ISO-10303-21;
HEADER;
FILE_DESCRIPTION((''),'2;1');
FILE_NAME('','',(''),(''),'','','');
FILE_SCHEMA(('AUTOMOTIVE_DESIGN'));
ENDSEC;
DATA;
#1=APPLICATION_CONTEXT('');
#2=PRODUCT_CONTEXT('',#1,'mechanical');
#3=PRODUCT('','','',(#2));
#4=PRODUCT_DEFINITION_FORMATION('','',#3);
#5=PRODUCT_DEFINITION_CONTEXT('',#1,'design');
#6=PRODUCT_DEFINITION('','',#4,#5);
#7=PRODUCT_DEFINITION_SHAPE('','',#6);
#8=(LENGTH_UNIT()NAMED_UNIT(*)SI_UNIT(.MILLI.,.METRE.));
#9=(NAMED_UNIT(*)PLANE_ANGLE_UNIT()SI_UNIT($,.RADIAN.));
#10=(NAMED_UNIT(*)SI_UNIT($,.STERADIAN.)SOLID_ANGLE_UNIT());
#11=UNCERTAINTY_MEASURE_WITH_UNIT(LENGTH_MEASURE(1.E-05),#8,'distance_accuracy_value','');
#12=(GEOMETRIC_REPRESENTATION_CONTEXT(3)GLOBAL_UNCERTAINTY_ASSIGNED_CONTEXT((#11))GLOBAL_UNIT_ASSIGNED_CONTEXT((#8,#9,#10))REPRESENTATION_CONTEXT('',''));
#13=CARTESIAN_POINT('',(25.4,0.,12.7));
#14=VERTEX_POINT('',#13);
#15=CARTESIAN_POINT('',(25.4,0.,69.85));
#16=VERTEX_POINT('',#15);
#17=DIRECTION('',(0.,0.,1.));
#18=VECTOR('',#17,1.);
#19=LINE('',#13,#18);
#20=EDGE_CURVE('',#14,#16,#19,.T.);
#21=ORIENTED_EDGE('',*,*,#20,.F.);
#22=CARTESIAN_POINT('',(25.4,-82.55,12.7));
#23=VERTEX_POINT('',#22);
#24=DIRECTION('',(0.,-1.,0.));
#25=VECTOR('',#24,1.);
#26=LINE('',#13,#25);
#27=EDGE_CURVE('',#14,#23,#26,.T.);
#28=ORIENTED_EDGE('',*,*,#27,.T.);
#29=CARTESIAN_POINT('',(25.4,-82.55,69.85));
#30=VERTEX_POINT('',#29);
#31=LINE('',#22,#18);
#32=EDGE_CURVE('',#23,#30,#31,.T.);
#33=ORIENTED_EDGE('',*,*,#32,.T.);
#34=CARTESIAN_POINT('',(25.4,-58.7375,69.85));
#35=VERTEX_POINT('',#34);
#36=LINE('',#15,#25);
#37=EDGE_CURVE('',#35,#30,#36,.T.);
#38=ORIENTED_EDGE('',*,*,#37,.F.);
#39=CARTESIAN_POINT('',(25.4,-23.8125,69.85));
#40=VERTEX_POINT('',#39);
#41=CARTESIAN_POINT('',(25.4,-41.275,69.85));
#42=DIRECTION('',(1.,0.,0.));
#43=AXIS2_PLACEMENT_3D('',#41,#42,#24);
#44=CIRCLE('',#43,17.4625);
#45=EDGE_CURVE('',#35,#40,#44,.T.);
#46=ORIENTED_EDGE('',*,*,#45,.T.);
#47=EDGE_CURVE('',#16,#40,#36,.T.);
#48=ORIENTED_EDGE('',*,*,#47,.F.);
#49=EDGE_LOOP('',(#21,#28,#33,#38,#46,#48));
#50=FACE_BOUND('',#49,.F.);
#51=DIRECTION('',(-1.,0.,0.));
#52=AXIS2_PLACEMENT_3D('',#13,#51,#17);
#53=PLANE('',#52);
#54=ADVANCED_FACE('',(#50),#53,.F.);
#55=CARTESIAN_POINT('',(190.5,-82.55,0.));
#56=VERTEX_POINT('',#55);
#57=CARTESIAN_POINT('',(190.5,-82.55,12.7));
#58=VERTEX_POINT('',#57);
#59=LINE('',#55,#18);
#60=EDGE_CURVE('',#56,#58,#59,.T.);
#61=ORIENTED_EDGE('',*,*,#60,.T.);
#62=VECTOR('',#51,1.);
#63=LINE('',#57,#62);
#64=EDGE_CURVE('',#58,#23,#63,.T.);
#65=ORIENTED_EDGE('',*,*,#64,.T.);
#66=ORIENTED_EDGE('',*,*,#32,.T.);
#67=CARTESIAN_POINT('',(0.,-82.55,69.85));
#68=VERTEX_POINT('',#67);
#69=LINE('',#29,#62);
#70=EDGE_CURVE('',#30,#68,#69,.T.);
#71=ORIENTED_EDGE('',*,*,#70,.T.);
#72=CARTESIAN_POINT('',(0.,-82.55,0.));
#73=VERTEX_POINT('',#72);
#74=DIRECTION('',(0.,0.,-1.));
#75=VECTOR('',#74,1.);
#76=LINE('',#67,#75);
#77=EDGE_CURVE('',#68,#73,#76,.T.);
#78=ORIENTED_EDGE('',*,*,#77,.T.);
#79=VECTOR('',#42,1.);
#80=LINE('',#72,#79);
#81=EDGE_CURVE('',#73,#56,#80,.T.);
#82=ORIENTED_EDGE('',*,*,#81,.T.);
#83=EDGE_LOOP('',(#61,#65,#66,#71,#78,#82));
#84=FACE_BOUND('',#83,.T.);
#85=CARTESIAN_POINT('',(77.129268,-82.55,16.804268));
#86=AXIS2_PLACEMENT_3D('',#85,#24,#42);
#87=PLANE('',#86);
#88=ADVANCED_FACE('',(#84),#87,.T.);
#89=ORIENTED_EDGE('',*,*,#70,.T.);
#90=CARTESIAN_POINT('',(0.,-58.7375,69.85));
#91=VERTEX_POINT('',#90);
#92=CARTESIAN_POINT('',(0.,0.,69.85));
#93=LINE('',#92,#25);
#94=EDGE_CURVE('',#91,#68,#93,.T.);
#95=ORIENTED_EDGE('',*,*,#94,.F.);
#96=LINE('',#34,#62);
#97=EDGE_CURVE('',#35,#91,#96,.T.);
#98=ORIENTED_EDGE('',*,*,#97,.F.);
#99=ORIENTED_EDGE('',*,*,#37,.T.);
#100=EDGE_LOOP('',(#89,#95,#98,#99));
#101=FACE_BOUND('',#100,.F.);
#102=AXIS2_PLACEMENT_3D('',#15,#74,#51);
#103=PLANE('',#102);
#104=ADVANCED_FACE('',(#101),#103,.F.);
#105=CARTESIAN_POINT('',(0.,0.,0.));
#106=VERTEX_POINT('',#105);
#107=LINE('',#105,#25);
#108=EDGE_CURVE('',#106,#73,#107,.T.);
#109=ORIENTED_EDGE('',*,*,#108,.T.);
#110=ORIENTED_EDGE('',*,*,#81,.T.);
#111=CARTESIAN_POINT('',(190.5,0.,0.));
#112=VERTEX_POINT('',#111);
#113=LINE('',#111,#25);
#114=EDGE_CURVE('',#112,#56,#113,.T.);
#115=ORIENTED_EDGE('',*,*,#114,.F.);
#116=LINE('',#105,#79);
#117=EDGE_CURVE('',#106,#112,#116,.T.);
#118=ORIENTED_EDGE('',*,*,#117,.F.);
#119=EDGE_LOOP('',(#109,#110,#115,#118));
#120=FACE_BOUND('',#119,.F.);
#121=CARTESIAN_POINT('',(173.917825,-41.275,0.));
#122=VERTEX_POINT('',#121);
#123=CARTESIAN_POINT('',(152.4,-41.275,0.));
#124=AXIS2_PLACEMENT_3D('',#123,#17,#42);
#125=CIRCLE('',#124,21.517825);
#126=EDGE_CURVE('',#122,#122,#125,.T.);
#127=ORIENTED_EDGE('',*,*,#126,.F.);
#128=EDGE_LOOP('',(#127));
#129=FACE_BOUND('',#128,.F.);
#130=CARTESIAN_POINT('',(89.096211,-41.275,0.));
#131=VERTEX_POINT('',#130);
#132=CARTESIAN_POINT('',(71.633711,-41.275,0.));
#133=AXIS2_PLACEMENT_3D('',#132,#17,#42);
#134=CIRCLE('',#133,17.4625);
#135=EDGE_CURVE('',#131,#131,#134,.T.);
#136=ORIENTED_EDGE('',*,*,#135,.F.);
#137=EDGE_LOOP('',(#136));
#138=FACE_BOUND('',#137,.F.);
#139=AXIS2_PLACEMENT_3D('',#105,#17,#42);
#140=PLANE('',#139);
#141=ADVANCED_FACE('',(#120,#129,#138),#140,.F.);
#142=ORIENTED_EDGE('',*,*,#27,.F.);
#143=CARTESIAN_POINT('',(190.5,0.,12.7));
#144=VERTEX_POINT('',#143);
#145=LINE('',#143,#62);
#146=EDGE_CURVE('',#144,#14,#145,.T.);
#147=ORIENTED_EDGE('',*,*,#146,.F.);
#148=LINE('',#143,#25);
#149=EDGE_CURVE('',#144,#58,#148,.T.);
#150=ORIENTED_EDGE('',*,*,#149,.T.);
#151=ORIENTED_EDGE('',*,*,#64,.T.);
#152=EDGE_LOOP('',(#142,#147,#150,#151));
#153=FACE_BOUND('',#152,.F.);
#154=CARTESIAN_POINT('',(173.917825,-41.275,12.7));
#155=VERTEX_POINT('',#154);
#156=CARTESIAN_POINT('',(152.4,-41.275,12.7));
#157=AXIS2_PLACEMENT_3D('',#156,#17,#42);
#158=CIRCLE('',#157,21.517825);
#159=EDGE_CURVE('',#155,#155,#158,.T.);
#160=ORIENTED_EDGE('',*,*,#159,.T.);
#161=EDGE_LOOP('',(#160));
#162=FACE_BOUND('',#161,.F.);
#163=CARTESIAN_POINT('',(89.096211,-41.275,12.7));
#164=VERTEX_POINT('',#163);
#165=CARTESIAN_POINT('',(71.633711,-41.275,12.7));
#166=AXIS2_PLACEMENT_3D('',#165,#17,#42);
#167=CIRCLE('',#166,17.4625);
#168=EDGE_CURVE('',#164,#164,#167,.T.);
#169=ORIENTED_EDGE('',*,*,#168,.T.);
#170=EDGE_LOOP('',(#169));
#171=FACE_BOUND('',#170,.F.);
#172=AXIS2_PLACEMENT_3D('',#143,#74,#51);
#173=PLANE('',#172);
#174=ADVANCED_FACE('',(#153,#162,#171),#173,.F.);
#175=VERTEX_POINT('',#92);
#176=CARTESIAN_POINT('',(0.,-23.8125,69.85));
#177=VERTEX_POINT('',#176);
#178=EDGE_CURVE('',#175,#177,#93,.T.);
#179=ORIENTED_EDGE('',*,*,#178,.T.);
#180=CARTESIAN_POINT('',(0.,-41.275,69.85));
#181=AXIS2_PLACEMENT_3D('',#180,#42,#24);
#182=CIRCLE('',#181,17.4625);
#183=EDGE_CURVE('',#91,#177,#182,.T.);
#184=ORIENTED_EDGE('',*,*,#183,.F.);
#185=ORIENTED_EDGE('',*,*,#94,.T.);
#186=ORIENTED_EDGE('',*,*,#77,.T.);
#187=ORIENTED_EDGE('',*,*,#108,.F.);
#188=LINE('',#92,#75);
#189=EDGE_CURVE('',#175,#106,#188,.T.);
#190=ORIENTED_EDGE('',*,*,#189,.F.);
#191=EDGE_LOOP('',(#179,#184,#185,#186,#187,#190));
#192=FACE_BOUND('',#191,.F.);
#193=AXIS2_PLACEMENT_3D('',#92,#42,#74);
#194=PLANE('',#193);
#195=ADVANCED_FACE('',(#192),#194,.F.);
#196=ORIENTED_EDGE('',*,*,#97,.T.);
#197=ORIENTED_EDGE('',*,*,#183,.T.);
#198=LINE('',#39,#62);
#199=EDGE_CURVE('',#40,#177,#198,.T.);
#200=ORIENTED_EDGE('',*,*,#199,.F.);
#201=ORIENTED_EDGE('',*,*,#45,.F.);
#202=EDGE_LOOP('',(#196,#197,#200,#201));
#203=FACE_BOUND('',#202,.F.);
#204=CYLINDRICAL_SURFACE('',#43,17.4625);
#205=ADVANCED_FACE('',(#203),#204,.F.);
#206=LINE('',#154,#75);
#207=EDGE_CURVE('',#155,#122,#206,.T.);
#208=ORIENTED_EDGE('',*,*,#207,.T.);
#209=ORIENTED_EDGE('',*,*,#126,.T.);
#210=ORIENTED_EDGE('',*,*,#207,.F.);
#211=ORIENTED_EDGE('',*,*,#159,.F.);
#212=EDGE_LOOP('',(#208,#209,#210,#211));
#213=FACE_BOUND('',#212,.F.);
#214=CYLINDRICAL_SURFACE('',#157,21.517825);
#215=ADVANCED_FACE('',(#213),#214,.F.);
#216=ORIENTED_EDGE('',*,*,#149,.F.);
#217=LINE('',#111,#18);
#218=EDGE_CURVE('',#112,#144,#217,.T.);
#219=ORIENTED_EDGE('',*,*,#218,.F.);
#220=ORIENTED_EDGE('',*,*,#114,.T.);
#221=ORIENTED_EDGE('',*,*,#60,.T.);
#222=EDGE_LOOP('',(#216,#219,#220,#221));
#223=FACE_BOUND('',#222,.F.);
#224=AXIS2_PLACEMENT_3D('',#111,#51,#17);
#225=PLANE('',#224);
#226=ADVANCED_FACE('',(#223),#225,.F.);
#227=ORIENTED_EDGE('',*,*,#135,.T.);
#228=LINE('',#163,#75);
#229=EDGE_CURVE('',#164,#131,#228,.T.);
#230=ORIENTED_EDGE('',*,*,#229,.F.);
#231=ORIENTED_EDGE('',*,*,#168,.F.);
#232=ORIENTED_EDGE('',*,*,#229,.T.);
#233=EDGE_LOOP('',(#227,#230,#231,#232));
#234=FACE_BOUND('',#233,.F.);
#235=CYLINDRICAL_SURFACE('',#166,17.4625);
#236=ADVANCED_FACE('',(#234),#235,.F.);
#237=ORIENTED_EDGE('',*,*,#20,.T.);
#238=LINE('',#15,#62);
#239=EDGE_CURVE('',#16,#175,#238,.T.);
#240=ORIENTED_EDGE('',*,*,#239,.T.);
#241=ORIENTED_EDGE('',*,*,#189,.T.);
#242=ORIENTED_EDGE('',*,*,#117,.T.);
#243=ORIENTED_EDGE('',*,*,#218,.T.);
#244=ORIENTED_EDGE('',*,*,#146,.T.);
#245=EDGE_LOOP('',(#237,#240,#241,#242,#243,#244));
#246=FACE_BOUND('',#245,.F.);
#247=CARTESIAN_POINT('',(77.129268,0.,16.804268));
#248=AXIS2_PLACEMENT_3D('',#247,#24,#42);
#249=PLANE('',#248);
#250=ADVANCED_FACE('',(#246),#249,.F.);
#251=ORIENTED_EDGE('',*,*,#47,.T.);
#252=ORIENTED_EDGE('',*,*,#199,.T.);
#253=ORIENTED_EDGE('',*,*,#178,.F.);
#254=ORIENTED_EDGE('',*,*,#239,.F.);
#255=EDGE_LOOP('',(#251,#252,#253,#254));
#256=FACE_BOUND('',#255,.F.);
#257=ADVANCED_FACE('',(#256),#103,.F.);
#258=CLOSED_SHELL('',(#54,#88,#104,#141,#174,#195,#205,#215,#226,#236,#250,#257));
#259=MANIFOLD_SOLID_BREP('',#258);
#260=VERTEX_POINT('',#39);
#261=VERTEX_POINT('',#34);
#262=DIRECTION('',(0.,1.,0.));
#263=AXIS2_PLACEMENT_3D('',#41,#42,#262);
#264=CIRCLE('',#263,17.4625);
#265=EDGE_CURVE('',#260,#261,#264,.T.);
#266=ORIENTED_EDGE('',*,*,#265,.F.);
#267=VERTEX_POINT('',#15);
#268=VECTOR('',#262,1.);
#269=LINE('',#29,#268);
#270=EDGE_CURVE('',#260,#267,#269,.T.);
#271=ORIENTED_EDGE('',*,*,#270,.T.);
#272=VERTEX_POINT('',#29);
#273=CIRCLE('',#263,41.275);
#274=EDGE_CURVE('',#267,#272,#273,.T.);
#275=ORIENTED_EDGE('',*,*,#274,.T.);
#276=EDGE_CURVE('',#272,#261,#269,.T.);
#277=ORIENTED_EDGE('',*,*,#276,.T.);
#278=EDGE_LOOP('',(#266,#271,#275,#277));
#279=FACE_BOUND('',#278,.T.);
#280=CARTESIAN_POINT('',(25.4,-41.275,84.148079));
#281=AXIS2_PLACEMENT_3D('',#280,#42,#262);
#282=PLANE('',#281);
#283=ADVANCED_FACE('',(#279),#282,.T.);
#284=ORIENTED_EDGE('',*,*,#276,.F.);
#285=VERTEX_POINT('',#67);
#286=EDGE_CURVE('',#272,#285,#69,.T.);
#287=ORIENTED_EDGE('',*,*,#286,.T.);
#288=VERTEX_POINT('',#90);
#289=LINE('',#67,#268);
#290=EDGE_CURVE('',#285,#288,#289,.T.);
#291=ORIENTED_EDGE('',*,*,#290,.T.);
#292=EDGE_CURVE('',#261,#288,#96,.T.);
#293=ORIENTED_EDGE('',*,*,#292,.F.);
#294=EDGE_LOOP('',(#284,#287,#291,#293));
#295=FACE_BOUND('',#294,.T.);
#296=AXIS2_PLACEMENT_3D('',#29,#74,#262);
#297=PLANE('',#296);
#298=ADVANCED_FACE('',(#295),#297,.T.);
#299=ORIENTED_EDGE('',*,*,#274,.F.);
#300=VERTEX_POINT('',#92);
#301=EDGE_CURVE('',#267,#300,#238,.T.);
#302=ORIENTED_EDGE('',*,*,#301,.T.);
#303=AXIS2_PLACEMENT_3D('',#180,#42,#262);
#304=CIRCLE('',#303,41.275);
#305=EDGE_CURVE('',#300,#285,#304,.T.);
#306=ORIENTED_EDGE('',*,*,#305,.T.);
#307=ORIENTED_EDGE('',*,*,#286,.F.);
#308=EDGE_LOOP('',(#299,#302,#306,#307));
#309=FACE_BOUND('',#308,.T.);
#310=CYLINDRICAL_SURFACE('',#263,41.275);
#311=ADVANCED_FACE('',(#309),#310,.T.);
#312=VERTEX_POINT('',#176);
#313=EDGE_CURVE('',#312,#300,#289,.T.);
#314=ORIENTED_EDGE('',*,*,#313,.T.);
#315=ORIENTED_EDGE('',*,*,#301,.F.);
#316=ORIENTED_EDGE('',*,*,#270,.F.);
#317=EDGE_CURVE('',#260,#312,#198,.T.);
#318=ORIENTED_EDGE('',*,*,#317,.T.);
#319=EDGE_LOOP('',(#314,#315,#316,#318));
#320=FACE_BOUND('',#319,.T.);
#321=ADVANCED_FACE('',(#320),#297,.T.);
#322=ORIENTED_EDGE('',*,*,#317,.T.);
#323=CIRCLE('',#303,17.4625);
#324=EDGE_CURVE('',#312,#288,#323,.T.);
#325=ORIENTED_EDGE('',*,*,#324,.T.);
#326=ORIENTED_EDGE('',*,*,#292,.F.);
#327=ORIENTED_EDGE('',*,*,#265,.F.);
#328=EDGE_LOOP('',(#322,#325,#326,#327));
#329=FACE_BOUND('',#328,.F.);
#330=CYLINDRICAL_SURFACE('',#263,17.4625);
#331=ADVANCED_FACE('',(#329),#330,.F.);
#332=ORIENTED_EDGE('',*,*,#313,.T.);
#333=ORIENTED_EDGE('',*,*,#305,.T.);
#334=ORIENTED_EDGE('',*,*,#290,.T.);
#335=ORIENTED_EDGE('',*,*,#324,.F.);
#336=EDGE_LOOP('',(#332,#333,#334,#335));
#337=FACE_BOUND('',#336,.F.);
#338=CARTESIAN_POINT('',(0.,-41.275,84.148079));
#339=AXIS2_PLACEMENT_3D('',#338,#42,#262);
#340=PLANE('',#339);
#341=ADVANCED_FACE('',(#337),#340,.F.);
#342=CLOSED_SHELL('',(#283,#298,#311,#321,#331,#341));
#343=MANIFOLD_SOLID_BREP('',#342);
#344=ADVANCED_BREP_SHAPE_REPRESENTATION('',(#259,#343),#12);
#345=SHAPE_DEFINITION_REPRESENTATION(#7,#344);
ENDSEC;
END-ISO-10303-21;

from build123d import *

# Parameters (mm, degrees)
F1_DEPTH = 82.55
F3_DEPTH = 25.4
F4_R     = 21.5178253772
F4_R_2   = 17.4625
F5_DEPTH = 25.4
F7_DEPTH = 25.4
F9_DEPTH = 25.4


with BuildPart() as f1:
    # F0 (on Front) → F1 (new body)
    with BuildSketch(Plane.XZ):
        Polygon((0, 69.85), (0, 0), (190.5, 0), (190.5, 12.7), (25.4, 12.7), (25.4, 69.85), align=None)
    extrude(amount=F1_DEPTH)

    # F4 (on face) → F5 (cut)
    with BuildSketch(Plane.XY.offset(12.7)):
        with Locations((152.4, -41.275)):
            Circle(F4_R)
        with Locations((71.6337114573, -41.275)):
            Circle(F4_R_2)
    extrude(amount=-F5_DEPTH, mode=Mode.SUBTRACT)

    # F6 (on face) → F7 (cut)
    with BuildSketch(Plane.YZ.offset(25.4)):
        with BuildLine():
            ThreePointArc((-58.7375, 69.85), (-41.275, 52.3875), (-23.8125, 69.85))
            Line((-23.8125, 69.85), (-58.7375, 69.85))
        make_face()
    extrude(amount=-F7_DEPTH, mode=Mode.SUBTRACT)


with BuildPart() as f3:
    # F2 (on face) → F3 (new body)
    with BuildSketch(Plane.YZ.offset(25.4)):
        with BuildLine():
            Line((-82.55, 69.85), (0, 69.85))
            ThreePointArc((0, 69.85), (-41.275, 111.125), (-82.55, 69.85))
        make_face()
    extrude(amount=-F3_DEPTH)

    # F8 (on face) → F9 (cut)
    with BuildSketch(Plane.YZ.offset(25.4)):
        with BuildLine():
            Line((-58.7375, 69.85), (-23.8125, 69.85))
            ThreePointArc((-23.8125, 69.85), (-41.275, 87.3125), (-58.7375, 69.85))
        make_face()
    extrude(amount=-F9_DEPTH, mode=Mode.SUBTRACT)


solid = Compound([f1.part, f3.part])
